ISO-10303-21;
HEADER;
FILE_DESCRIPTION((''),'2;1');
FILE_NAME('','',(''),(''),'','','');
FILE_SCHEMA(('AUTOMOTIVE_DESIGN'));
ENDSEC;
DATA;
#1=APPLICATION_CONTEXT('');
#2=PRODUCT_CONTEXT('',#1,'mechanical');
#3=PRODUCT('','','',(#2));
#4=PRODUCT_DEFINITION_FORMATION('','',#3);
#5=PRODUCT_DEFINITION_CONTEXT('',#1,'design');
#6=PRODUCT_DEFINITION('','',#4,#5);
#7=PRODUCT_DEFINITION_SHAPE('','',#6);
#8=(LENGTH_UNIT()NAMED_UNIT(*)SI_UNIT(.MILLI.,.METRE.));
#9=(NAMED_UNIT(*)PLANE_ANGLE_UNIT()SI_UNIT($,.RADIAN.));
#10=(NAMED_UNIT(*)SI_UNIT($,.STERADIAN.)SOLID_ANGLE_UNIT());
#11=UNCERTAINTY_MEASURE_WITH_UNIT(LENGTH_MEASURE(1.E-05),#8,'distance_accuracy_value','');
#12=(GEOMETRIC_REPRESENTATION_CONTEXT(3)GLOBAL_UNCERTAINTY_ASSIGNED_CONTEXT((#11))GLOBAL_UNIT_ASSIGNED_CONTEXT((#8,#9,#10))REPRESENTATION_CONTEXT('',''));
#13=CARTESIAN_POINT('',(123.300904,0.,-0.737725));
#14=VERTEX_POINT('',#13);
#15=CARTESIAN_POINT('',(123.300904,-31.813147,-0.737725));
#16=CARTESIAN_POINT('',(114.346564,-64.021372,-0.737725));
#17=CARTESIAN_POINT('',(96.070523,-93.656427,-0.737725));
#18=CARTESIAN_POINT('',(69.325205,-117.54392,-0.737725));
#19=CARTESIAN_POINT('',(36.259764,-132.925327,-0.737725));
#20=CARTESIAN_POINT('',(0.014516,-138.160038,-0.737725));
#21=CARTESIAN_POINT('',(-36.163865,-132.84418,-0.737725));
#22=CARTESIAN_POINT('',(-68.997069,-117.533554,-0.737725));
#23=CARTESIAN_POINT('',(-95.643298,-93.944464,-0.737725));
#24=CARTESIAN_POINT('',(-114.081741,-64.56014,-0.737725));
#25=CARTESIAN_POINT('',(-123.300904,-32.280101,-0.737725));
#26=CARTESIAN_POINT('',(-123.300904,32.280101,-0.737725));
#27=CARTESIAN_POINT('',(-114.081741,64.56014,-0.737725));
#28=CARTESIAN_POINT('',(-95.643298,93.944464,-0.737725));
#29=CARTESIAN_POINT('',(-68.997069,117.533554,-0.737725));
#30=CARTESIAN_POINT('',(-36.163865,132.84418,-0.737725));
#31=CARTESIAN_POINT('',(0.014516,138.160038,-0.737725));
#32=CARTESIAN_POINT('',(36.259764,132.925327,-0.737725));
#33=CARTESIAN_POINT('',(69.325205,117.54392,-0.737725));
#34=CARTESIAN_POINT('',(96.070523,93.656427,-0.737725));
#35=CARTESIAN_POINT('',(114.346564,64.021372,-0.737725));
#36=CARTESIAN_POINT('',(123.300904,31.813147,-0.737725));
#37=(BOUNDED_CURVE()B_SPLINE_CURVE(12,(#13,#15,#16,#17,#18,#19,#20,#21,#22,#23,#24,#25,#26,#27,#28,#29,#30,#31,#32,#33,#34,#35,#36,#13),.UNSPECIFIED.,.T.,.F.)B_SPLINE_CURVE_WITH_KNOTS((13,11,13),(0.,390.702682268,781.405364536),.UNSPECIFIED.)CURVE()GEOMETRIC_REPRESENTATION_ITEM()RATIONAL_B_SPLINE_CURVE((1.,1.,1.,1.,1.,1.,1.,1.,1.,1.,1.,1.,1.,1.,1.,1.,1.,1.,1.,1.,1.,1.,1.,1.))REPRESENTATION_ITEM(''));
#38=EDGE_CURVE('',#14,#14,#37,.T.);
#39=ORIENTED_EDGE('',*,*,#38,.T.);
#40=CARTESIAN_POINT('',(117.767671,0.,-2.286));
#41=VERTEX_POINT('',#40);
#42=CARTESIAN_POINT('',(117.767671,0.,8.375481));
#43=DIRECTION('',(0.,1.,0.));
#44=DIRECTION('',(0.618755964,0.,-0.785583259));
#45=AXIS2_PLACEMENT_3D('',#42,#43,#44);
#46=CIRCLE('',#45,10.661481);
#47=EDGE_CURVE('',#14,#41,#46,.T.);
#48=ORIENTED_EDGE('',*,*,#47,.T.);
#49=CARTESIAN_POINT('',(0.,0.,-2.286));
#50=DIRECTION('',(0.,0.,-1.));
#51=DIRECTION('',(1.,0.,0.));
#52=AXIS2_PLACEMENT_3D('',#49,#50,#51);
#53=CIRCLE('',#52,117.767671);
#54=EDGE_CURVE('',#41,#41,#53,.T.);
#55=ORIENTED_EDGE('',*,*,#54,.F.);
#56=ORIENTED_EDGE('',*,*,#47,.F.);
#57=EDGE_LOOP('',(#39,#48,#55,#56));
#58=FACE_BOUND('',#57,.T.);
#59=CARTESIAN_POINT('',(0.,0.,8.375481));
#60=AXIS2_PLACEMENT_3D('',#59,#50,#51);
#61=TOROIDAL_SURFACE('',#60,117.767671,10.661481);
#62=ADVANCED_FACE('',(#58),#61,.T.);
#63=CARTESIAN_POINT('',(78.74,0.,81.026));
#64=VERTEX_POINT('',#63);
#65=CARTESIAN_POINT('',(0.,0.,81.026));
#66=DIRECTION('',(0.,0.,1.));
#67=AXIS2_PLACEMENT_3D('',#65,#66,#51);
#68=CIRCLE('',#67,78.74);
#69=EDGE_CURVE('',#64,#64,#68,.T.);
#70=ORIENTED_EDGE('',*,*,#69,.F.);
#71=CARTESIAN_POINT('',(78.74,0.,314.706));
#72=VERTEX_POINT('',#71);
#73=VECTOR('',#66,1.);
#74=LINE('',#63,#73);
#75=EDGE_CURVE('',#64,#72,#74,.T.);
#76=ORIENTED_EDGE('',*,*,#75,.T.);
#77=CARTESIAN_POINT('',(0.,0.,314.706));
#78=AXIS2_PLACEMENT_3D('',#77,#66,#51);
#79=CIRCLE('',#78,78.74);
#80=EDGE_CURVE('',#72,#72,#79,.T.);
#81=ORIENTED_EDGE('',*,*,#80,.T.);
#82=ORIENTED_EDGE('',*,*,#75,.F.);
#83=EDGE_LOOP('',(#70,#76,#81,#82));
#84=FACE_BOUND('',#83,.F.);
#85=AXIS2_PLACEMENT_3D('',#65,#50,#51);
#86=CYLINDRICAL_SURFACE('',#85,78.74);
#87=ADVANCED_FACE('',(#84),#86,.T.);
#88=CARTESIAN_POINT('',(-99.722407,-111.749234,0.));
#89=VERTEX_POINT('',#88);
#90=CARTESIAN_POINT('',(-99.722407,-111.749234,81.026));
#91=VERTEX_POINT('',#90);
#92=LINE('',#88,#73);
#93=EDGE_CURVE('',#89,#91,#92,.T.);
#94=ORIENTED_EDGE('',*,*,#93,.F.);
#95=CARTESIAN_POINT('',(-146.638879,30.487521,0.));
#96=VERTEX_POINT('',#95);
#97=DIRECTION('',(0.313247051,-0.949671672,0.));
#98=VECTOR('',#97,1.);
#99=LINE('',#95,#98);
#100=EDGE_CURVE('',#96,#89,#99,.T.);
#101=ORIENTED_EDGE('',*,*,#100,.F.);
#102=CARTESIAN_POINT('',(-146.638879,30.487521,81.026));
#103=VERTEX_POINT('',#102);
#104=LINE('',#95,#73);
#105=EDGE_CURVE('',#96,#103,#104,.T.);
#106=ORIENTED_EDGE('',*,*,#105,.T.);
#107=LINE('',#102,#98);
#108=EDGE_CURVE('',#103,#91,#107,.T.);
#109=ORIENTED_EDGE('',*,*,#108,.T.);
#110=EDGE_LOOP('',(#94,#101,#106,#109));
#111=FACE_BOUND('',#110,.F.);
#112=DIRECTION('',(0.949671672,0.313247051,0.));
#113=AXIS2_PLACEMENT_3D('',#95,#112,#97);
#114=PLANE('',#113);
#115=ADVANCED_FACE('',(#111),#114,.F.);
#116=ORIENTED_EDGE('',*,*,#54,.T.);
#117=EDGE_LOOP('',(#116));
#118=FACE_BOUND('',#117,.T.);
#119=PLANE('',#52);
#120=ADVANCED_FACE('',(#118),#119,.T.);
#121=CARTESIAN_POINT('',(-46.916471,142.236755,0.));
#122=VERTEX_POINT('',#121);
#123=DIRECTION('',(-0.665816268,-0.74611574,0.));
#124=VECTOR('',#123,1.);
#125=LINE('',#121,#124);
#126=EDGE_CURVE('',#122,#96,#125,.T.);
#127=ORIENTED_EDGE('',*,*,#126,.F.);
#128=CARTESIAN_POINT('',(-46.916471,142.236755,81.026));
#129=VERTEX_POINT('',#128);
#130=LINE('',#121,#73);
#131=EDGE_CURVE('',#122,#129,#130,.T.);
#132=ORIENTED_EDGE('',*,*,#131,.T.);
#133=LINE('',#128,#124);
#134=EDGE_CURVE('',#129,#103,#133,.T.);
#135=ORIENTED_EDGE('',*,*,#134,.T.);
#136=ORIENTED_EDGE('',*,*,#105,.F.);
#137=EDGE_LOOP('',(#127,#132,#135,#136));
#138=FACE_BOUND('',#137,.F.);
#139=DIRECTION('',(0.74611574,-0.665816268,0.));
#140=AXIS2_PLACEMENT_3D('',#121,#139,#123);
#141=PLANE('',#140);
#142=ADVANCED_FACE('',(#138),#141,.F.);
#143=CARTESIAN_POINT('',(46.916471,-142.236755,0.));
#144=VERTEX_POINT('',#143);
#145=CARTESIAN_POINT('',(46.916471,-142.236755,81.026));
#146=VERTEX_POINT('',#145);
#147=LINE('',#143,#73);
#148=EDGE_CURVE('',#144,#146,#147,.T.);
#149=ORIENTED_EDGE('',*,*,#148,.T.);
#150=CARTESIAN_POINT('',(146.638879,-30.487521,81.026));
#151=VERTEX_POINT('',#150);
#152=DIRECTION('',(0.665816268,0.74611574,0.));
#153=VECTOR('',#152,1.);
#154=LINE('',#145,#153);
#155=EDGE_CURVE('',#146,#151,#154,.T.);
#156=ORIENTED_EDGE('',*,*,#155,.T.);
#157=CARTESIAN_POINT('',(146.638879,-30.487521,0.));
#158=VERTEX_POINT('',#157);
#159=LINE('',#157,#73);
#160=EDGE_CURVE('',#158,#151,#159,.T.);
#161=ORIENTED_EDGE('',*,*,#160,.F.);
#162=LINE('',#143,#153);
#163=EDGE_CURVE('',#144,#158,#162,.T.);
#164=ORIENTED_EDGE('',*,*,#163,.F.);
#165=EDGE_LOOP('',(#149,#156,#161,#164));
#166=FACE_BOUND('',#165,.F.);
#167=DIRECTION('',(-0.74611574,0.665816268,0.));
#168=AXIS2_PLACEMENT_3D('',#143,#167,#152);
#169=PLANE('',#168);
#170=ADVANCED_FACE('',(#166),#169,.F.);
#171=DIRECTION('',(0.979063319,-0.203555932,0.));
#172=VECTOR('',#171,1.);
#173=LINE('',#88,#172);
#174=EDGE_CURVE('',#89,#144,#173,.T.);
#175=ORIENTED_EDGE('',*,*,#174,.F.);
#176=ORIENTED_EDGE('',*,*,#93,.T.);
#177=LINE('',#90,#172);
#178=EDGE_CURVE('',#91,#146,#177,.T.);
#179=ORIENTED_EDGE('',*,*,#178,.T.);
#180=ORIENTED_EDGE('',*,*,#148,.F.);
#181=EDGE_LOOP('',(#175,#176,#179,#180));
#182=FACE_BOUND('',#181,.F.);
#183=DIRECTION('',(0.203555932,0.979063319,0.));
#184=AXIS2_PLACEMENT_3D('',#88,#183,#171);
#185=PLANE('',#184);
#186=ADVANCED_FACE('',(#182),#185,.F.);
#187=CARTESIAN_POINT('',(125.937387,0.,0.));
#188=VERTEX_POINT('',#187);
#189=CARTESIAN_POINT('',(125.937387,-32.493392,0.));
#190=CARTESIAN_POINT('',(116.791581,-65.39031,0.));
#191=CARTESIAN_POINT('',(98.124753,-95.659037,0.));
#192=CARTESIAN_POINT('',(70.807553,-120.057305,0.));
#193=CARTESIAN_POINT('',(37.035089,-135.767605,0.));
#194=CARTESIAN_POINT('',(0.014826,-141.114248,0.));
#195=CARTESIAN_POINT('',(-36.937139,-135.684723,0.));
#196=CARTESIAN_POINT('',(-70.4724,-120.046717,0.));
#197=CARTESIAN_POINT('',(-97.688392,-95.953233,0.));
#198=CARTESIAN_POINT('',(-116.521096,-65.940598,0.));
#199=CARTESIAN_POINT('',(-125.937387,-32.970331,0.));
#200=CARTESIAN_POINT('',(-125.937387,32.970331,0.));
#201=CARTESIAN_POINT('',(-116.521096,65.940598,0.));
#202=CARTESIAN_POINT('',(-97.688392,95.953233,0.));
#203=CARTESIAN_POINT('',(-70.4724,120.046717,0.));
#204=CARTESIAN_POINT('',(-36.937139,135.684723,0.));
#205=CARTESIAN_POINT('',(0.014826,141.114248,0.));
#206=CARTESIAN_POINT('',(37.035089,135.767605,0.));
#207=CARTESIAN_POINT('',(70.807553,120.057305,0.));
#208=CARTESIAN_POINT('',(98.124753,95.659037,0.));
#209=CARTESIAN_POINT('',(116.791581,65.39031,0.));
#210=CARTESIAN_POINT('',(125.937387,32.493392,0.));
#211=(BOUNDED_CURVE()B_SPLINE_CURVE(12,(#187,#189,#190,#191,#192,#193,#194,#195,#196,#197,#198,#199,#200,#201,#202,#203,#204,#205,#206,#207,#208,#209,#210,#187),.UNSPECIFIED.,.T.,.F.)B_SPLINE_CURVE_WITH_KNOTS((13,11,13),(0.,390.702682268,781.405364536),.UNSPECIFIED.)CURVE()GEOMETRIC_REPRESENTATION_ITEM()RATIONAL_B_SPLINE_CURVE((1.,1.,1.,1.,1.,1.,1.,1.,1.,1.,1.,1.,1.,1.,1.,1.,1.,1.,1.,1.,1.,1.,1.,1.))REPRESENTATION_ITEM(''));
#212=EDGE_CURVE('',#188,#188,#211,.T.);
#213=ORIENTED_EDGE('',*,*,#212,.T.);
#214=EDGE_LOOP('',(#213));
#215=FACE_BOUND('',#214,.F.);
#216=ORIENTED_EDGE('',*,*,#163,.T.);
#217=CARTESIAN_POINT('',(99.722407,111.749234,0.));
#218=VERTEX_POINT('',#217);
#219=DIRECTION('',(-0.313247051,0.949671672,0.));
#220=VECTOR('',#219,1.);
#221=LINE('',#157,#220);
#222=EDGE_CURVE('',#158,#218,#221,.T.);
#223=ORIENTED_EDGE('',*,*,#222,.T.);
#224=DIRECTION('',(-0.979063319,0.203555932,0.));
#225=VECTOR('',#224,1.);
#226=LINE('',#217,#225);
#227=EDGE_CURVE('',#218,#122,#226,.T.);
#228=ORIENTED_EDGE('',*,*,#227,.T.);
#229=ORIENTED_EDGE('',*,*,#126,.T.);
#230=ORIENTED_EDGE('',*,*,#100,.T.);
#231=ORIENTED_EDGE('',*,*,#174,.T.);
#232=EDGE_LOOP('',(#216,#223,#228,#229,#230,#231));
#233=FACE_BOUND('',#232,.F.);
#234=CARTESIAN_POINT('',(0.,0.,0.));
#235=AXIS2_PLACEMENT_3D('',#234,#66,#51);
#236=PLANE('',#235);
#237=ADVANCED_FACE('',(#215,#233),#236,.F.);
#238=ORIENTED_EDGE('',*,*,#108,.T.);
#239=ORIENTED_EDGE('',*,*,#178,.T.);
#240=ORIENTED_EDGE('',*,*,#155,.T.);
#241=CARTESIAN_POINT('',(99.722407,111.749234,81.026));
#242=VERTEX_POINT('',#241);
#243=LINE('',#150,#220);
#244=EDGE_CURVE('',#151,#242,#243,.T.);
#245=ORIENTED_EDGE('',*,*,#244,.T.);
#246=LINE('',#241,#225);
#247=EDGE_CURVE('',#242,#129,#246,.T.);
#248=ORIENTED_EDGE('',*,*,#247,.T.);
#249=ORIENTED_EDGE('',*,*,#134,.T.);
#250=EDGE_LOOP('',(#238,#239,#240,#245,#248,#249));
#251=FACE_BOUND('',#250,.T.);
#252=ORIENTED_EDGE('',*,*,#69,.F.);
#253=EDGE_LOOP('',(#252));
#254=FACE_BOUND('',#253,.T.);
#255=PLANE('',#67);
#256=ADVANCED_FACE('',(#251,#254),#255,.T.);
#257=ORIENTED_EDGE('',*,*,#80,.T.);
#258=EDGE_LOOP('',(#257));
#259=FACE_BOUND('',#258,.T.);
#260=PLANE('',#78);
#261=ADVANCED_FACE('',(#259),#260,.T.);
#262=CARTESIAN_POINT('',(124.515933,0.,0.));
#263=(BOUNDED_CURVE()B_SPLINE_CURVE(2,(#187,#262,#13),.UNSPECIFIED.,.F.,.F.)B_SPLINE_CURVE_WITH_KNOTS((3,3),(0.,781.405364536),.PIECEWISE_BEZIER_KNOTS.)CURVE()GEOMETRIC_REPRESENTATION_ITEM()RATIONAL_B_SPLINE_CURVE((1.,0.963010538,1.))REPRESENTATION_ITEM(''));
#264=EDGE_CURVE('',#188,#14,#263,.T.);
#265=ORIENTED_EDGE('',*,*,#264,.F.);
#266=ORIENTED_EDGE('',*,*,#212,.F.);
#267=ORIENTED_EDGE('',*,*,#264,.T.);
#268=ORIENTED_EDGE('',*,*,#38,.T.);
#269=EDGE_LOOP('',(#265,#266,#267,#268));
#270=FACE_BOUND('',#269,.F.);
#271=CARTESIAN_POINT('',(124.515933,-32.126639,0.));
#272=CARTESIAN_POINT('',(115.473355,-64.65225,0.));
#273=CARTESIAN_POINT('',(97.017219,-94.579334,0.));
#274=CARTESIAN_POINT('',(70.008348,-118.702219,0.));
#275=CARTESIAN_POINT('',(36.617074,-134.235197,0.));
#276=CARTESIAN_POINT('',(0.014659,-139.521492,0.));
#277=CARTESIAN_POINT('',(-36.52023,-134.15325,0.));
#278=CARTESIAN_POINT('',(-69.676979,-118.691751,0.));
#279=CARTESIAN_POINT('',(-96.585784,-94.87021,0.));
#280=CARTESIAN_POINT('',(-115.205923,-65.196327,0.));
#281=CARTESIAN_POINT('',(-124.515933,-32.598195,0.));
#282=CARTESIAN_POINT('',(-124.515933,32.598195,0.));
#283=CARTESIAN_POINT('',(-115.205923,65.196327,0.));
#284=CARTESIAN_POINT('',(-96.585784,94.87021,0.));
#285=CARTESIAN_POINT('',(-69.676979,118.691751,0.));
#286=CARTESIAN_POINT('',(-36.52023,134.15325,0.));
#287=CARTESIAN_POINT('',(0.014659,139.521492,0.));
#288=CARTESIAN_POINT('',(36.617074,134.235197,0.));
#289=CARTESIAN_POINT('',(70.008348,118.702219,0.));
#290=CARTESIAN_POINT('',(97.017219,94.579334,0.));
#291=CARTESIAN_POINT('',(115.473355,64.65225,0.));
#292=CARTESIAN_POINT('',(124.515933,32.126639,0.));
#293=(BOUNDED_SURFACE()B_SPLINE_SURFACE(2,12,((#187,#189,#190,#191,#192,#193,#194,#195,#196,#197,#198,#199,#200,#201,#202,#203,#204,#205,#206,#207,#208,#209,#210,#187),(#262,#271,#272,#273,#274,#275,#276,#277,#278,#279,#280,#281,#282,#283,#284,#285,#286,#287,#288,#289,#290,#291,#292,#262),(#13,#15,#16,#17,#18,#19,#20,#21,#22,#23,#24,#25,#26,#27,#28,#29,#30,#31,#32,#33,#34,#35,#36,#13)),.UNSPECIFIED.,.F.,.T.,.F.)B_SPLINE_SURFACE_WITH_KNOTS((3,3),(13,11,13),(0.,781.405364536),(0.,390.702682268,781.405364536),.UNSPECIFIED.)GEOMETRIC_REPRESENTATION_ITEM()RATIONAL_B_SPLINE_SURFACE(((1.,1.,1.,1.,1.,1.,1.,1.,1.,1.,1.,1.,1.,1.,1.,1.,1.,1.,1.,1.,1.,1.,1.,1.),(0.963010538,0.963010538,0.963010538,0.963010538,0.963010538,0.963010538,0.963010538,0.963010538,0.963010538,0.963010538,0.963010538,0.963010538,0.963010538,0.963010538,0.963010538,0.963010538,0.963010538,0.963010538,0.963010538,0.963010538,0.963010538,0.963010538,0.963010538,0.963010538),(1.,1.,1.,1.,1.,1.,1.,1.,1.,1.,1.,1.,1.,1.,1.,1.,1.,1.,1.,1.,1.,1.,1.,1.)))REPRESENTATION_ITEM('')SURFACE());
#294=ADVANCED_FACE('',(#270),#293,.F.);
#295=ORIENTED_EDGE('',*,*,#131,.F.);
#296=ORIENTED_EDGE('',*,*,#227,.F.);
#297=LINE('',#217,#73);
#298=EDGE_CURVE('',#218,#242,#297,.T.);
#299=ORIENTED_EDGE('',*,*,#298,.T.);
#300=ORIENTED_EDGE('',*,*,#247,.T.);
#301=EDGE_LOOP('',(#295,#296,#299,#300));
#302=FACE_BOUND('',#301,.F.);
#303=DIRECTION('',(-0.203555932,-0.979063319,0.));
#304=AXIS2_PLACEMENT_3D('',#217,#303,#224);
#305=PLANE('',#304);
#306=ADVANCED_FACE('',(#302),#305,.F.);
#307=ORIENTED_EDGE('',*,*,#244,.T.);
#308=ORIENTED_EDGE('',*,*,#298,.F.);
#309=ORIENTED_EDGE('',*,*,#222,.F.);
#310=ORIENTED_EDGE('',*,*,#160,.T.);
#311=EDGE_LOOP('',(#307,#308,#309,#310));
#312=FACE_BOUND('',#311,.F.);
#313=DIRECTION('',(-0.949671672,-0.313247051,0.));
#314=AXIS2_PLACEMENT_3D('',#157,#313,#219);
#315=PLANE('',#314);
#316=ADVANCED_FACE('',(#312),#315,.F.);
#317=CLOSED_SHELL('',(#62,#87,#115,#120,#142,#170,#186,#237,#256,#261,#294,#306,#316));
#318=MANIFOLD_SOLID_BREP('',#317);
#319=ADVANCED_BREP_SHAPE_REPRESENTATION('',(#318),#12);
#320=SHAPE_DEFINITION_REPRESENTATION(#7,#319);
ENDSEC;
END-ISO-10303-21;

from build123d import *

# Parameters (mm, degrees)
F1_DEPTH = 81.026
F2_R     = 78.74
F3_DEPTH = 233.68
F4_R     = 124.3645263244
F5_DEPTH = 2.286
F7_R     = 5.08


# Not quite as in the source:
# - a fillet or chamfer that OpenCascade refuses, or shapes differently, is made with other operations: its cross-section is extruded or revolved along the edge and cut away or added


with BuildPart() as f1:
    # F0 (on Top) → F1 (new body)
    with BuildSketch(Plane.XY):
        Polygon((46.9164714903, -142.236754682), (146.6388786516, -30.4875211745), (99.7224071613, 111.7492335075), (-46.9164714903, 142.236754682), (-146.6388786516, 30.4875211745), (-99.7224071613, -111.7492335075), align=None)
    extrude(amount=F1_DEPTH)

    # F2 (on face) → F3 (join)
    with BuildSketch(Plane.XY.offset(81.026)):
        Circle(F2_R)
    extrude(amount=F3_DEPTH)

    # F4 (on face) → F5 (join)
    with BuildSketch(Plane(origin=(0, 0, 0), x_dir=(1, 0, 0), z_dir=(0, 0, -1))):
        Circle(F4_R)
    extrude(amount=F5_DEPTH)

    # F6: fillet of radius 10.6614809392 on 1 edges, made by hand

    # F6_s1 → F6_t2 (revolve, cut)
    with BuildSketch(Plane.XZ):
        with BuildLine():
            ThreePointArc((124.3645263244, 0), (121.2585269877, -1.6983020197), (117.767671403, -2.286))
            Line((117.767671403, -2.286), (124.3645263244, -2.286))
            Line((124.3645263244, -2.286), (124.3645263244, 0))
        make_face()
    revolve(axis=Axis((0, 0, -2.286), (0, 0, -1)), mode=Mode.SUBTRACT)

    # F7
    f7_edges = [f1.edges().sort_by_distance(p)[0] for p in [
        (-124.364526, 0, 0),
    ]]
    fillet(f7_edges, radius=F7_R)


solid = f1.part
